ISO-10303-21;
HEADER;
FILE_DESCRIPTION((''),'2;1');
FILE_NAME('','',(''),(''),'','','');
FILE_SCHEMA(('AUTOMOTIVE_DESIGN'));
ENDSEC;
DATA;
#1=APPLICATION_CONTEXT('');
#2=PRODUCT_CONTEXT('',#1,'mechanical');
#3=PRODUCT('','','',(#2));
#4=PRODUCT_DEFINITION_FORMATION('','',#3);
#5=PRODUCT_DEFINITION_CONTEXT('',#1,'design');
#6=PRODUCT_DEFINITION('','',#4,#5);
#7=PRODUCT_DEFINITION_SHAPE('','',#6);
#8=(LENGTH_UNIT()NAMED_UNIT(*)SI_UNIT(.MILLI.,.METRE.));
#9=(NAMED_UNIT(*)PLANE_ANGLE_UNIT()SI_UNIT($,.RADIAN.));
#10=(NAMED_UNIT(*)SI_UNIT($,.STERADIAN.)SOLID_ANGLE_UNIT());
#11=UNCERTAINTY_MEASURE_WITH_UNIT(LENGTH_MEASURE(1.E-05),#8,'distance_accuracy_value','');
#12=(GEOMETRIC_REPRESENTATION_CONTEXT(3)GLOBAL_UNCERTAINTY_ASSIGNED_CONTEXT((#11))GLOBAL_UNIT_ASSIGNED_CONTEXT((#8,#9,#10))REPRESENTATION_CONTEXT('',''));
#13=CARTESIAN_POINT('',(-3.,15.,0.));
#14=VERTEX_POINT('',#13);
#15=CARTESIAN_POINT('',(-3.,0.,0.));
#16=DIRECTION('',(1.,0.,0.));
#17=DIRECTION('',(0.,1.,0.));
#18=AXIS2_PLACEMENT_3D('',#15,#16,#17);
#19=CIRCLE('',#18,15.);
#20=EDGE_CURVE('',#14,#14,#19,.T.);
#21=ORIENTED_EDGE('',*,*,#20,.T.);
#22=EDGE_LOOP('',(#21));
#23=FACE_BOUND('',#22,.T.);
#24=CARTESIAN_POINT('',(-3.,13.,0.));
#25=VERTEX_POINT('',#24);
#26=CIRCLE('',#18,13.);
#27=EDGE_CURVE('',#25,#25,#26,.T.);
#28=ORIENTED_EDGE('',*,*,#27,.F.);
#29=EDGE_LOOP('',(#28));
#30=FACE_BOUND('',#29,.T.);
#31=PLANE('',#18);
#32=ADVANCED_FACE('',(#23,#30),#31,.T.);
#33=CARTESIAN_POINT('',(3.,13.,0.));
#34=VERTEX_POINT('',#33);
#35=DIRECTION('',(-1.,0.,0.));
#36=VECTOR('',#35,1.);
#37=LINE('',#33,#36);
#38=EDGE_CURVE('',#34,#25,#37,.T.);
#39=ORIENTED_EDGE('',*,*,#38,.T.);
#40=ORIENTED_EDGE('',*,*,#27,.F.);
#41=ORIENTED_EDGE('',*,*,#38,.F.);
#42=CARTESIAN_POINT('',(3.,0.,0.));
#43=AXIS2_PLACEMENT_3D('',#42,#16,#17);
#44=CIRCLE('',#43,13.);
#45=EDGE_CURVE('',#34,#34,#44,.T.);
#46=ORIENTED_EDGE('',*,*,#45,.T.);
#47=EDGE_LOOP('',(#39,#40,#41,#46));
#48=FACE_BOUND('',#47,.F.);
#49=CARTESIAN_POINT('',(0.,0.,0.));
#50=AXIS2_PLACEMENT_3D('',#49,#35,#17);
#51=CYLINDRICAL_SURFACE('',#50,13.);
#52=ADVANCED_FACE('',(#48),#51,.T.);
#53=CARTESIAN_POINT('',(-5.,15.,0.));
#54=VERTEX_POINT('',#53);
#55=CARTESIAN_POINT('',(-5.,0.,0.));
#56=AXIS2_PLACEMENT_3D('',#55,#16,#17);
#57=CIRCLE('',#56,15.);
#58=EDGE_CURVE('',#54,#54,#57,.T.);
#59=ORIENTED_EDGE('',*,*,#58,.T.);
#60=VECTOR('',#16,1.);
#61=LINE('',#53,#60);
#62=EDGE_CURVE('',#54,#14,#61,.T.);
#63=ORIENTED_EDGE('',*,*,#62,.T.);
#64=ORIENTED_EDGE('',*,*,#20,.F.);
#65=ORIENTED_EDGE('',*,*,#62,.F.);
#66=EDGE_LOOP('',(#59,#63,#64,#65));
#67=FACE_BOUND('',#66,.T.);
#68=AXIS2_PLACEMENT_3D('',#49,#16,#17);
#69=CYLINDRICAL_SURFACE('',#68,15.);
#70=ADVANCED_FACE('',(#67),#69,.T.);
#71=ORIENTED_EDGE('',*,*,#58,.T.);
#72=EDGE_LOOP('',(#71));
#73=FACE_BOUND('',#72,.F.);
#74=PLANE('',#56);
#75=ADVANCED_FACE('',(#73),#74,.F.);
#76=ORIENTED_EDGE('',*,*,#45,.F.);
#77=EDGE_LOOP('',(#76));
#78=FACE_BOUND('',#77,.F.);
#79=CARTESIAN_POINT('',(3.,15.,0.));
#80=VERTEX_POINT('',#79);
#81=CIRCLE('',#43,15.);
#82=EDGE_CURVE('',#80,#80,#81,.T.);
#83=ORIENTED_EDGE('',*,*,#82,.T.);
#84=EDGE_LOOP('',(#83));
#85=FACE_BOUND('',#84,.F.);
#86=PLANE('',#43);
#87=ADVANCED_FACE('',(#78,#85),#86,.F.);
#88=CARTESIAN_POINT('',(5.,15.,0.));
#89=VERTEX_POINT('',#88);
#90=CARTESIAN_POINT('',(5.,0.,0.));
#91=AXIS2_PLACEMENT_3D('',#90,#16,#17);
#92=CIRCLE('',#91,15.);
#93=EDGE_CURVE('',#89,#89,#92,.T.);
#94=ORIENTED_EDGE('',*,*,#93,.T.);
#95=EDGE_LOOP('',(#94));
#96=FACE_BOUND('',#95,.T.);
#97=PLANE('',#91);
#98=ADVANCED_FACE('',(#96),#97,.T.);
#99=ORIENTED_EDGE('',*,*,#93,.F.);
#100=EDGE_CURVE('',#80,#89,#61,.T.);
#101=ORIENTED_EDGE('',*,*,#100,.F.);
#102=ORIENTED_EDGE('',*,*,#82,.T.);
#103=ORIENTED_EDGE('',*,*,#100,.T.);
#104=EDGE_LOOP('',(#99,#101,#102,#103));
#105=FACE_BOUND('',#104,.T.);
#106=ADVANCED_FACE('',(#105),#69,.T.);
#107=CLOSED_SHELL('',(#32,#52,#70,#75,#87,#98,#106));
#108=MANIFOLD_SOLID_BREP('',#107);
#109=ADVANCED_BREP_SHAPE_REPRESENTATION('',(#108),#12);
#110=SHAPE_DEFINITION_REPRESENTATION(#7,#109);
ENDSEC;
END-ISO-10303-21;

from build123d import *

# Parameters (mm, degrees)
F0_R     = 15
F1_DEPTH = 5
F2_R     = 15
F2_R_2   = 13
F3_DEPTH = 3


# Not quite as in the source:
# - a feature names something its author has since deleted; it is built from what else it names


with BuildPart() as f1:
    # F0 (on Right) → F1 (new body, symmetric)
    with BuildSketch(Plane.YZ):
        Circle(F0_R)
    extrude(amount=F1_DEPTH, both=True)

    # F2 (on Right) → F3 (cut, symmetric)
    with BuildSketch(Plane.YZ):
        Circle(F2_R)
        Circle(F2_R_2, mode=Mode.SUBTRACT)
    extrude(amount=F3_DEPTH, both=True, mode=Mode.SUBTRACT)


solid = f1.part
